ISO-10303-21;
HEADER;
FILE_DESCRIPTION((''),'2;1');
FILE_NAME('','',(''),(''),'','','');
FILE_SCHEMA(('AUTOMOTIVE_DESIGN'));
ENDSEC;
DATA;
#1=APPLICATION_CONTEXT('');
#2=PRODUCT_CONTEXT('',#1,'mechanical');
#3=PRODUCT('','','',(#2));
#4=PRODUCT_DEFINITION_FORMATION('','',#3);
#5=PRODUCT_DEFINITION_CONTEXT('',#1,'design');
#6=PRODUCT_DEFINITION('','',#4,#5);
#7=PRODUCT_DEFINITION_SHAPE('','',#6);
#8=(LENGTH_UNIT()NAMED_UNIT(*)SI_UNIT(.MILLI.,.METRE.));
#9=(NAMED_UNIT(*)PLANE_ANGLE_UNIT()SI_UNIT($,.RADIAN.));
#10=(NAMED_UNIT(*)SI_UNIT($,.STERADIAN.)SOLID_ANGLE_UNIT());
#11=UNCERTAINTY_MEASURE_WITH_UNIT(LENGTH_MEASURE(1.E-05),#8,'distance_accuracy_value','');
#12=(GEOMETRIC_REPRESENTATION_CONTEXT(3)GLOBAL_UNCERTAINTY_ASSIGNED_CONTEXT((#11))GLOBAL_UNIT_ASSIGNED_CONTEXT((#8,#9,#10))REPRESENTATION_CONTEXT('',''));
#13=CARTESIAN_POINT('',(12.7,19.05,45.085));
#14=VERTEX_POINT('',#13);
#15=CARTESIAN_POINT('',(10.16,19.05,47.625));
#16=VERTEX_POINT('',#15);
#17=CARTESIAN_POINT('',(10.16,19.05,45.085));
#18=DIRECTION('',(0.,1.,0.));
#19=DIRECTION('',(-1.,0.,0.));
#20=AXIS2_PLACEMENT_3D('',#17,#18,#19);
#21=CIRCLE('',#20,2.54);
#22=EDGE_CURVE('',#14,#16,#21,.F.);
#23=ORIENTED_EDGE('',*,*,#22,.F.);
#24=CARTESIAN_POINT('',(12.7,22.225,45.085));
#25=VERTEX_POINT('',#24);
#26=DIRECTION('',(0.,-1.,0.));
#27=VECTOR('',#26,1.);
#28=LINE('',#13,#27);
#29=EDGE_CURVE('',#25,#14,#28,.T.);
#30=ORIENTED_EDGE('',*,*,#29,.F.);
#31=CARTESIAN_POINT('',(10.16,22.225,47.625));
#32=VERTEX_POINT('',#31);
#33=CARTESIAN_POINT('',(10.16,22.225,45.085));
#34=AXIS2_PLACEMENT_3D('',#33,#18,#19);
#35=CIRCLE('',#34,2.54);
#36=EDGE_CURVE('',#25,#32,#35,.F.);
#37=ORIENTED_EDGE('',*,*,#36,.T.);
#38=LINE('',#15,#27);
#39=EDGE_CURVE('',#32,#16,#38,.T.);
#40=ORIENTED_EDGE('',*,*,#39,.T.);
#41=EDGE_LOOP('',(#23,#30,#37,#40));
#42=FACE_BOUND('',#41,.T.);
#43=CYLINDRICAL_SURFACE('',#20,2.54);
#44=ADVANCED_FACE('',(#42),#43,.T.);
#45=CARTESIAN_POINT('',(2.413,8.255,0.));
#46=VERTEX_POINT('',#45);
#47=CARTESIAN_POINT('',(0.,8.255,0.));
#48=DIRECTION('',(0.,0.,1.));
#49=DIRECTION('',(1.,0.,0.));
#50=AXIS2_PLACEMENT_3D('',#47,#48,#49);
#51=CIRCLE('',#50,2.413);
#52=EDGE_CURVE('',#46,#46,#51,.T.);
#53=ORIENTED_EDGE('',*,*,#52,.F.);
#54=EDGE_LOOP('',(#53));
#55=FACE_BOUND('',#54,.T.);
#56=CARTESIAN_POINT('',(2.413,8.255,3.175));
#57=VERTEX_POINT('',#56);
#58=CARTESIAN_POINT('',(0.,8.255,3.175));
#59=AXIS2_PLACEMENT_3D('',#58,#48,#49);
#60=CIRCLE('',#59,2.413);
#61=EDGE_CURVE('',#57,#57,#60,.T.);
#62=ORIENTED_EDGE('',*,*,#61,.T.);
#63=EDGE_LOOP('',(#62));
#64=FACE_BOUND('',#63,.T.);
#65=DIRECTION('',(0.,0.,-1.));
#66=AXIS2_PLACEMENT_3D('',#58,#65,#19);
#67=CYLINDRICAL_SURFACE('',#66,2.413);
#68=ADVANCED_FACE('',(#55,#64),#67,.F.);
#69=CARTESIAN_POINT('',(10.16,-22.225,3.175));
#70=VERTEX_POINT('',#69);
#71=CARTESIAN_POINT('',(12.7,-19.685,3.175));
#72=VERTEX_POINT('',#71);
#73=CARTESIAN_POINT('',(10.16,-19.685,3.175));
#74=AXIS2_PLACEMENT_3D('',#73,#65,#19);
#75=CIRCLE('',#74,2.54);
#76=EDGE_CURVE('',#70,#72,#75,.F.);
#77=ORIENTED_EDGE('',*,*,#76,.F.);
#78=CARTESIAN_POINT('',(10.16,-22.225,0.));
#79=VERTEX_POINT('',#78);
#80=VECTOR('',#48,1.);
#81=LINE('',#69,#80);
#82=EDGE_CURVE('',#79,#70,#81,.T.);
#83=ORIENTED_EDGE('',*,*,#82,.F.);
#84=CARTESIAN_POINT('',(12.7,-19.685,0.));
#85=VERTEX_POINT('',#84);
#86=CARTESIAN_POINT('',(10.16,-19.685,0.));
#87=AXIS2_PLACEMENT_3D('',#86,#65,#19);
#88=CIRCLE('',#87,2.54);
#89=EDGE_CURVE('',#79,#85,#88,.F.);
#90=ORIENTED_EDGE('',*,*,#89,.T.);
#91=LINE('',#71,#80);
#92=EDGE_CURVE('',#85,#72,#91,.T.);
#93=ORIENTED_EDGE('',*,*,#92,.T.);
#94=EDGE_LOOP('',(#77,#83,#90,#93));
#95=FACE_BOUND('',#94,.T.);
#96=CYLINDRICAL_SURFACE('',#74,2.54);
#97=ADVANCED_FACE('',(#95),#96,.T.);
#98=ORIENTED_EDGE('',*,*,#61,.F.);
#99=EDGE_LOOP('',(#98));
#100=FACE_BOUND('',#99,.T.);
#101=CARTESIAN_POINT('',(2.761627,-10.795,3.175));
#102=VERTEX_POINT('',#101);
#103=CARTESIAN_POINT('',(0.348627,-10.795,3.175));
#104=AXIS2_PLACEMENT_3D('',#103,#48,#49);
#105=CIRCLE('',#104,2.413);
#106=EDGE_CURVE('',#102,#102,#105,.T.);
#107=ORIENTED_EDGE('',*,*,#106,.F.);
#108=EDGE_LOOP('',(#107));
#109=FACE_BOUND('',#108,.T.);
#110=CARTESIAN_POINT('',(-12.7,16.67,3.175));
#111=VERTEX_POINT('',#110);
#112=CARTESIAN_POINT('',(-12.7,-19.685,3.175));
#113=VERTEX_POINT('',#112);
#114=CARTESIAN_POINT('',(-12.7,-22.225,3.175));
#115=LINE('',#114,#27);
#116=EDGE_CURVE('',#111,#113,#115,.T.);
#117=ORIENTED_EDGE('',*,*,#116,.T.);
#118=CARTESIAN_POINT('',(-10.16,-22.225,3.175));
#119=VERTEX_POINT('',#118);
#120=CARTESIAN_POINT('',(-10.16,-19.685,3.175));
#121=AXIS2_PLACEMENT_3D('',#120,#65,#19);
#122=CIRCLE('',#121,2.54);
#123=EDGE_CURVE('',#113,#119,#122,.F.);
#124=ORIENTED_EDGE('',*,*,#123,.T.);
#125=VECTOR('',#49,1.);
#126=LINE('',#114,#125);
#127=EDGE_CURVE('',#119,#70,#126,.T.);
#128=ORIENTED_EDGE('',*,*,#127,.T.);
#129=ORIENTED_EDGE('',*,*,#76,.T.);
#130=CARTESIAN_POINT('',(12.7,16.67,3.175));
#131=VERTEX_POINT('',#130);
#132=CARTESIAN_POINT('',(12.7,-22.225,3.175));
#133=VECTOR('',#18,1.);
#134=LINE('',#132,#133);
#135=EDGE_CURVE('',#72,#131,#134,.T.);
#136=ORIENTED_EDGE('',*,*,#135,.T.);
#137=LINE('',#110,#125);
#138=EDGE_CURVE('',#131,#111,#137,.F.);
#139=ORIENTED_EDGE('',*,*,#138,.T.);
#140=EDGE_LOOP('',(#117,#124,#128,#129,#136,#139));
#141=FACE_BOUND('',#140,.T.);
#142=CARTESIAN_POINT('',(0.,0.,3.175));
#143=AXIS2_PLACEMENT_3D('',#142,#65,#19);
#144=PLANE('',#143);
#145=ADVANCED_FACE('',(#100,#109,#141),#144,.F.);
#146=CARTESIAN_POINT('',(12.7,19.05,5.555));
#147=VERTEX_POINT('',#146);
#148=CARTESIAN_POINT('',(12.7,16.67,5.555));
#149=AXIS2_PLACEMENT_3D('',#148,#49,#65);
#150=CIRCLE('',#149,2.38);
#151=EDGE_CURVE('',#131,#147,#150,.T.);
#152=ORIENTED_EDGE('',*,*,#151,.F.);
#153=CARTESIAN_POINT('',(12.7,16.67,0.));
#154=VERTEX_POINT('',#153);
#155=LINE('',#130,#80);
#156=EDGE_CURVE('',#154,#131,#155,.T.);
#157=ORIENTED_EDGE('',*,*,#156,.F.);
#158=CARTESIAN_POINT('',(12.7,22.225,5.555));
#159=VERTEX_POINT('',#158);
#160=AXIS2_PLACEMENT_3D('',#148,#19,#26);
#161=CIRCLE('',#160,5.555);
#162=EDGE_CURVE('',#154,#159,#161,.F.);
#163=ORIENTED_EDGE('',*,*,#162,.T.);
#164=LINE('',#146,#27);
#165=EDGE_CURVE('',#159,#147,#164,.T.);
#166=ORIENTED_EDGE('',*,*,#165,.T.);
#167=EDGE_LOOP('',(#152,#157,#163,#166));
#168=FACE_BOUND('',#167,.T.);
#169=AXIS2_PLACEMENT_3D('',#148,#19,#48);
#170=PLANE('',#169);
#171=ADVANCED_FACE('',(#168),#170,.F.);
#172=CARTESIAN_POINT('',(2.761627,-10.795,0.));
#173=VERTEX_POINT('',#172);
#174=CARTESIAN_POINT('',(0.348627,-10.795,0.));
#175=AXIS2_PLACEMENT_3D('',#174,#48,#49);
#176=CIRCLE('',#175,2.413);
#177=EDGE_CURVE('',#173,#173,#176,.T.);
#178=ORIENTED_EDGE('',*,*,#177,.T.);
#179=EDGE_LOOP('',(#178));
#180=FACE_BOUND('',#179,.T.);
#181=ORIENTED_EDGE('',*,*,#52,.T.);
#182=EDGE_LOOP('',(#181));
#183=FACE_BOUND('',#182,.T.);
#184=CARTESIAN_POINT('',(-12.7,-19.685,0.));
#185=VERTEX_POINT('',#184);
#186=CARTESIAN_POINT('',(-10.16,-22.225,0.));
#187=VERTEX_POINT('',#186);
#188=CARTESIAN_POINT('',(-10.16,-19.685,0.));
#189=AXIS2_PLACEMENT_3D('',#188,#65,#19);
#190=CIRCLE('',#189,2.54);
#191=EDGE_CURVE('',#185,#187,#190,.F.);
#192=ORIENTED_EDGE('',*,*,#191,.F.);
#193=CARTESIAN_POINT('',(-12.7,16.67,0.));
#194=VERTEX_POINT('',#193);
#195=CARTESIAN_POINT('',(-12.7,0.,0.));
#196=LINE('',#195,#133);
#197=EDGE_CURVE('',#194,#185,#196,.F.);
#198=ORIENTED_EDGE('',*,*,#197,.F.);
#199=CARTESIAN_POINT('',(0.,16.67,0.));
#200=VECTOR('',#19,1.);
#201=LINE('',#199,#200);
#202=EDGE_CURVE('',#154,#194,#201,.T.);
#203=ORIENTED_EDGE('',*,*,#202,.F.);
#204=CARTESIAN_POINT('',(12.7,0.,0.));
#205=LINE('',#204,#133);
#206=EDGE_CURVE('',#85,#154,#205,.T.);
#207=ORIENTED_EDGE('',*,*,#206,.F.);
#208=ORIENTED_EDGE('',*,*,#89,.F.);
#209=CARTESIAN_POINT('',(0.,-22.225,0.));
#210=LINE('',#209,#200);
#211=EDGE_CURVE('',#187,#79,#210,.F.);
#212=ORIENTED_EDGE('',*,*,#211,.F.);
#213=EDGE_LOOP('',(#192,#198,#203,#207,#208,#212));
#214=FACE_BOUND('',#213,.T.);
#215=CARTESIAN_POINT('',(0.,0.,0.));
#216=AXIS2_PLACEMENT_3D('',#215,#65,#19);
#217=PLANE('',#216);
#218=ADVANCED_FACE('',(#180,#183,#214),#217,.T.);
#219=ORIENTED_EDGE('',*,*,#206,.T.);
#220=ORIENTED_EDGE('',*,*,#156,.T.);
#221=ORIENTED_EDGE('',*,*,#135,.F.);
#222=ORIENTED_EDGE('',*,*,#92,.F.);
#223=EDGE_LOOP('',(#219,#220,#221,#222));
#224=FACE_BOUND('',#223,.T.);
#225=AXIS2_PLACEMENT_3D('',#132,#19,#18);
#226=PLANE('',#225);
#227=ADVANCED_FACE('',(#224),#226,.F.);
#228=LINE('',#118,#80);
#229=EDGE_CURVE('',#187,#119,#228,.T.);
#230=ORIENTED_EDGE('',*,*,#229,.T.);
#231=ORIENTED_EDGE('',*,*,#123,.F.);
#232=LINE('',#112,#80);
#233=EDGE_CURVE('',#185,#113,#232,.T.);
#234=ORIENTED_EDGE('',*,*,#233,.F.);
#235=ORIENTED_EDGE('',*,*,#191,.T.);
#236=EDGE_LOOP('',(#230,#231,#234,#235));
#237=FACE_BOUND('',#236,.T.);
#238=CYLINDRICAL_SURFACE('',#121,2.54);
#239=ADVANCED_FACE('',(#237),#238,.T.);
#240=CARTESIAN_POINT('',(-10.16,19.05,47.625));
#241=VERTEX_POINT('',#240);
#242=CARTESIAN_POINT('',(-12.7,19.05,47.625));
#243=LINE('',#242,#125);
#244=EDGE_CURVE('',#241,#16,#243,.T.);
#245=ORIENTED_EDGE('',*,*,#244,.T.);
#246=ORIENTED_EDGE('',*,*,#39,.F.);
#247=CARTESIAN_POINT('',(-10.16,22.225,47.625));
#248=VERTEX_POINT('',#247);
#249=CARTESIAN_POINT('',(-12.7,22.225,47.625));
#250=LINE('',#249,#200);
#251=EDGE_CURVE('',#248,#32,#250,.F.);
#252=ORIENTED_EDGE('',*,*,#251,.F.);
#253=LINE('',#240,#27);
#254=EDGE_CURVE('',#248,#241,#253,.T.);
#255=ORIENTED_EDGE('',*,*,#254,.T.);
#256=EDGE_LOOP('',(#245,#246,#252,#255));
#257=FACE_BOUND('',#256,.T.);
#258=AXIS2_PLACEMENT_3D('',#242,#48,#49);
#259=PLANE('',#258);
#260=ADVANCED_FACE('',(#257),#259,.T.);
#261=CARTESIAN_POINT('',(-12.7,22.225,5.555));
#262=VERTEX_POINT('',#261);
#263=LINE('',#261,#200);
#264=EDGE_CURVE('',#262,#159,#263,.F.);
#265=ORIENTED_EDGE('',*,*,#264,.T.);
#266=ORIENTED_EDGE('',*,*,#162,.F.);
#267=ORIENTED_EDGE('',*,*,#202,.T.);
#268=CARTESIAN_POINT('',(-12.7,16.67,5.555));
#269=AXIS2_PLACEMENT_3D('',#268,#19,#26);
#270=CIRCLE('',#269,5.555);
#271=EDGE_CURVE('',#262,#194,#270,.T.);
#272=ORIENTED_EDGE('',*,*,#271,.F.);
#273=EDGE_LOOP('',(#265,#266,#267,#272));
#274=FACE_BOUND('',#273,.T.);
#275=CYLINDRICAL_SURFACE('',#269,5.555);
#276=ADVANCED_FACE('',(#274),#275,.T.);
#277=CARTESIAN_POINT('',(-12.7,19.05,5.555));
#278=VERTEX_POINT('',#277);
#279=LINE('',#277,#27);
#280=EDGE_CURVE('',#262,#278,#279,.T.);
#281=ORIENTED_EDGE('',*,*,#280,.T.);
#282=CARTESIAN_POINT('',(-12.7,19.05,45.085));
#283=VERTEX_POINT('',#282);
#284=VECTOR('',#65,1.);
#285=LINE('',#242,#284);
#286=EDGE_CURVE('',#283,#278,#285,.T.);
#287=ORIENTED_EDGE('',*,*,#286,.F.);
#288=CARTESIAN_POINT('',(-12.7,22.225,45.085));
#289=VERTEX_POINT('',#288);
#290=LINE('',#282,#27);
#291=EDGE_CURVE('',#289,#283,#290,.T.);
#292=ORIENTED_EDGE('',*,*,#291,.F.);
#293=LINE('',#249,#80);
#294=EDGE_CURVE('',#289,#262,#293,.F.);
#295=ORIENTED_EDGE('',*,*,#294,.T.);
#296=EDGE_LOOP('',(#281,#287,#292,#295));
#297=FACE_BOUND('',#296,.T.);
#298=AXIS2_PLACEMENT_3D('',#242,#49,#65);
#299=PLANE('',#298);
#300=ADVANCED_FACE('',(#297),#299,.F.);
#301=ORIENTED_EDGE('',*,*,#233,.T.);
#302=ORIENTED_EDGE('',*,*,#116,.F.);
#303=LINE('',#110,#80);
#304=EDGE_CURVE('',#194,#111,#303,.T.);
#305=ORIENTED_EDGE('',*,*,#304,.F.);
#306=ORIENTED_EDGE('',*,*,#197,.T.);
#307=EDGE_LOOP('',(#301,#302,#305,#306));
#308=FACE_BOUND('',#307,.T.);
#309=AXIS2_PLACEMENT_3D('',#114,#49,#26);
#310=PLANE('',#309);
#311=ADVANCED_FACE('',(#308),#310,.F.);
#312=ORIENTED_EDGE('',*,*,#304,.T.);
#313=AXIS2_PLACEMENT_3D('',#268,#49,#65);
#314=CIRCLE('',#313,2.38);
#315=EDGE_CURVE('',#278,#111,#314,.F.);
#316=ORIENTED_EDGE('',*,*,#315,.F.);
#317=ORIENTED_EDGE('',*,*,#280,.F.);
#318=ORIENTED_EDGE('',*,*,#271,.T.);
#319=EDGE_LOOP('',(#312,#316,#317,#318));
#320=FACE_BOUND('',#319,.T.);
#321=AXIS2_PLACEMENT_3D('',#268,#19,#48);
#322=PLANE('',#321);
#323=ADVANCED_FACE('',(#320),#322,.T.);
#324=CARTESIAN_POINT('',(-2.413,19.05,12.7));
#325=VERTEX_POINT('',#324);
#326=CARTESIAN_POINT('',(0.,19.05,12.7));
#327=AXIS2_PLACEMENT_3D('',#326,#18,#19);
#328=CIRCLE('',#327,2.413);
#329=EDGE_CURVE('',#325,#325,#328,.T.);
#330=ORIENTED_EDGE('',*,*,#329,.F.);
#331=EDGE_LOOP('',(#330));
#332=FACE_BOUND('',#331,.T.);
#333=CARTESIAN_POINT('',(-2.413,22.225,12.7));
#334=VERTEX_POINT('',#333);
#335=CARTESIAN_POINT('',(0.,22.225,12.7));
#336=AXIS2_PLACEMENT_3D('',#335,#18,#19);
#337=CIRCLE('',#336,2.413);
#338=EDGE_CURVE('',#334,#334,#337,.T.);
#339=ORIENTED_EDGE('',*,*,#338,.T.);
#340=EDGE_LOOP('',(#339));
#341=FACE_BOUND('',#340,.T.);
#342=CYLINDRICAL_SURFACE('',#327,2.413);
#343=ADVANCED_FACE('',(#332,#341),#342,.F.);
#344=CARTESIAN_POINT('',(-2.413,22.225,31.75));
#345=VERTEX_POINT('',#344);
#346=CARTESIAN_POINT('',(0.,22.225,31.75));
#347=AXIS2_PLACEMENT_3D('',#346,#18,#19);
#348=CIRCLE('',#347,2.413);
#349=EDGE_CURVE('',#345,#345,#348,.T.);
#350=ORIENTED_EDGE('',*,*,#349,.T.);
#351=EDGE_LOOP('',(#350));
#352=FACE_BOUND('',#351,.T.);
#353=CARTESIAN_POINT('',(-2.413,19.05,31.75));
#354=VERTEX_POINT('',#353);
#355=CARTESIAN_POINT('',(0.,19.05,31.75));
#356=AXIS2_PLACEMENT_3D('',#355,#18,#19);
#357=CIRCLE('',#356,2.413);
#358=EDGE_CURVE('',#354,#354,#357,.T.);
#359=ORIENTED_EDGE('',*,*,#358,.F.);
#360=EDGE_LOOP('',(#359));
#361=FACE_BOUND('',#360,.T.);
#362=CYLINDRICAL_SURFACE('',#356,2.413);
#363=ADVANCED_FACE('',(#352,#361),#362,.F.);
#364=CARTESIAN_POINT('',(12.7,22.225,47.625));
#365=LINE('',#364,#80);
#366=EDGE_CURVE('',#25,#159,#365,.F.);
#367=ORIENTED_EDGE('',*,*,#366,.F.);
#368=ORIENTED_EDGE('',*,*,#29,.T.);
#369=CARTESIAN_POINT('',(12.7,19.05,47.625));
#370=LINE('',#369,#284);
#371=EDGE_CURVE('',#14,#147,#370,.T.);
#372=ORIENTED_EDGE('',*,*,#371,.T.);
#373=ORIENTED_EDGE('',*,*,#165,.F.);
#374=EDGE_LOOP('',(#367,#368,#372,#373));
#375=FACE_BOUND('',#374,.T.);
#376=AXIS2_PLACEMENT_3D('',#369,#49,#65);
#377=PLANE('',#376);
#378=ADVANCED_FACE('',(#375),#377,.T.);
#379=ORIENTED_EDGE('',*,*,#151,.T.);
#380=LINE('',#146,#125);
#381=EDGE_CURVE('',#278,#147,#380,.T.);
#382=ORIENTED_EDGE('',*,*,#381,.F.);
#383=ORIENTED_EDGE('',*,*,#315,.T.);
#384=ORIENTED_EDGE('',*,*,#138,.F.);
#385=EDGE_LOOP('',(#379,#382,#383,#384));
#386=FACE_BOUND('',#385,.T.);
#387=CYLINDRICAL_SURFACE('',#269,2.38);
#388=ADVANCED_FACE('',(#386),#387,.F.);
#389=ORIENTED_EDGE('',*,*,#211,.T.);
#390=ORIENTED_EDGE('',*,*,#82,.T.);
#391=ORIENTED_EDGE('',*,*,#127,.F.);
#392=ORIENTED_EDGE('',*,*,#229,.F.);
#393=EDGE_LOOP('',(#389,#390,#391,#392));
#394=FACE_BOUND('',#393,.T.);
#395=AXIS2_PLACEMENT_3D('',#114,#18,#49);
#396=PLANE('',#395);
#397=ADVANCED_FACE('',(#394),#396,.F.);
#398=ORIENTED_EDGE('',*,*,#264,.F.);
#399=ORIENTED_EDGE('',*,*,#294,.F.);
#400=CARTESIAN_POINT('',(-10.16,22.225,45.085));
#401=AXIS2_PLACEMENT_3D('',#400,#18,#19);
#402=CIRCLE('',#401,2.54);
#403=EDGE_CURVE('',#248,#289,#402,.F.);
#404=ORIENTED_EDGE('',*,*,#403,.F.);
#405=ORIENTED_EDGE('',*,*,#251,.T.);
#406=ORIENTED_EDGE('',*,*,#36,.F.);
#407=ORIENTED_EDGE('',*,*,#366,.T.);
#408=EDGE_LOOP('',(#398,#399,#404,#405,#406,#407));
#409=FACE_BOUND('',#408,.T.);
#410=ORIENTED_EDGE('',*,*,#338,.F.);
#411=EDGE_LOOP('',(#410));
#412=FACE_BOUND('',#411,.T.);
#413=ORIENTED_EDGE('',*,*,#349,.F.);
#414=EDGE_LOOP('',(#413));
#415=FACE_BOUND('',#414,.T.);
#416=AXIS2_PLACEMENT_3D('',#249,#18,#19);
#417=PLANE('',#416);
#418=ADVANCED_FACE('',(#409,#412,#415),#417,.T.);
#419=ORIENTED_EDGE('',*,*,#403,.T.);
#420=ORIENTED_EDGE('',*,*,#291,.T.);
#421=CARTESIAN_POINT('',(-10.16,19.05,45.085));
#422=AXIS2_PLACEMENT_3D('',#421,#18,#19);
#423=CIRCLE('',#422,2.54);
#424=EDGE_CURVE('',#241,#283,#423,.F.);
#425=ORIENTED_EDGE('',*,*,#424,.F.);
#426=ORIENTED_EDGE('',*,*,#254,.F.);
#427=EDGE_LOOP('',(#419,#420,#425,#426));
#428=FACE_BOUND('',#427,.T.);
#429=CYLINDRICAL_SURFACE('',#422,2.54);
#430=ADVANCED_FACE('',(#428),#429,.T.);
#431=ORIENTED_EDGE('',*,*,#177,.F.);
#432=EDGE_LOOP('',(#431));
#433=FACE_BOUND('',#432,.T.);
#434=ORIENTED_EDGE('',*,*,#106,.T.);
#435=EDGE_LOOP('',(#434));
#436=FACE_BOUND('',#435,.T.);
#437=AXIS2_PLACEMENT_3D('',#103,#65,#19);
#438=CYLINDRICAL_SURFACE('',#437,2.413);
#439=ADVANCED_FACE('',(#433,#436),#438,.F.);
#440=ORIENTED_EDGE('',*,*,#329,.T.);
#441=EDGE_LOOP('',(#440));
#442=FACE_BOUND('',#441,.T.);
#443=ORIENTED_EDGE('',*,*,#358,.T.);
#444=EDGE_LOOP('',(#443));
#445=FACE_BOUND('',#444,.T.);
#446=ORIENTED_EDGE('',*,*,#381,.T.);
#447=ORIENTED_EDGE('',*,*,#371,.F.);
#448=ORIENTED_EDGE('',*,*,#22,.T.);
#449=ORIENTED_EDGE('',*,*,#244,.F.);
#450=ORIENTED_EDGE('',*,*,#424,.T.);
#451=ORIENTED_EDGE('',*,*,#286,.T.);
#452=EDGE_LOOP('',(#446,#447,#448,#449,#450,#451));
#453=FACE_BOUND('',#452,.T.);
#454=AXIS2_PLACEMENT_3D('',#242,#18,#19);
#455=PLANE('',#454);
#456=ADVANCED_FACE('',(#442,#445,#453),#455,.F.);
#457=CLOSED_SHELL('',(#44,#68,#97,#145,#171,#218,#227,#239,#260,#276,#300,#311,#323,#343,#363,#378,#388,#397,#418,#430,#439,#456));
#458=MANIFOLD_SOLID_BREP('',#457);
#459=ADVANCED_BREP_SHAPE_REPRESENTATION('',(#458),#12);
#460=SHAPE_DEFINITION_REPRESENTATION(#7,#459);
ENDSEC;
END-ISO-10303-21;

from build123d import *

# Parameters (mm, degrees)
SKETCH1_W              = 25.4
SKETCH1_H              = 44.45
SKETCH1_R              = 2.413
BOSS_EXTRUDE1_DEPTH    = 3.175
SKETCH2_W              = 25.4
SKETCH2_H              = 3.175
BOSS_EXTRUDE2_DEPTH    = 44.45
SKETCH3_R              = 2.413
CUT_EXTRUDE1_DEPTH     = 44.45
FILLET1_R              = 2.54
CONVERT_SOLID1_START   = -12.7
CONVERT_SOLID1_DEPTH   = 25.4
CONVERT_SOLID1_2_DEPTH = 25.4


# Read off the part's stored shape, not the designer's step: Convert-Solid1
with BuildPart() as part:
    # Sketch1 → Boss-Extrude1 (new body)
    with BuildSketch(Plane.XY):
        Rectangle(SKETCH1_W, SKETCH1_H)
        with Locations((0, 8.255)):
            Circle(SKETCH1_R, mode=Mode.SUBTRACT)
        with Locations((0.348627451, -10.795)):
            Circle(SKETCH1_R, mode=Mode.SUBTRACT)
    extrude(amount=BOSS_EXTRUDE1_DEPTH)

    # Sketch2 → Boss-Extrude2 (add)
    with BuildSketch(Plane.XY.offset(3.175)):
        with Locations((0, 20.6375)):
            Rectangle(SKETCH2_W, SKETCH2_H)
    extrude(amount=BOSS_EXTRUDE2_DEPTH)

    # Sketch3 → Cut-Extrude1 (cut)
    with BuildSketch(Plane(origin=(0, 22.225, 0), x_dir=(1, 0, 0), z_dir=(0, 1, 0))):
        with Locations(Location((0, -12.7, 0), (0, 0, 270))):
            Circle(SKETCH3_R)
        with Locations(Location((0, -31.75, 0), (0, 0, 270))):
            Circle(SKETCH3_R)
    extrude(amount=-CUT_EXTRUDE1_DEPTH, mode=Mode.SUBTRACT)

    # Fillet1
    fillet1_edges = [part.edges().sort_by_distance(p)[0] for p in [
        (-12.7, 20.6375, 47.625),
        (12.7, 20.6375, 47.625),
        (12.7, -22.225, 1.5875),
        (-12.7, -22.225, 1.5875),
    ]]
    fillet(fillet1_edges, radius=FILLET1_R)

    # Convert-Solid1 outline → Convert-Solid1 (cut)
    with BuildSketch(Plane.YZ.offset(CONVERT_SOLID1_START)):
        with BuildLine():
            Line((22.225, 0), (22.225, 5.555000066))
            ThreePointArc((22.225, 5.555000066), (20.59797815, 1.62702185), (16.669999934, 0))
            Line((16.669999934, 0), (22.225, 0))
        make_face()
    extrude(amount=CONVERT_SOLID1_DEPTH, mode=Mode.SUBTRACT)

    # Convert-Solid1 2 outline → Convert-Solid1 2 (add)
    with BuildSketch(Plane.YZ.offset(CONVERT_SOLID1_START)):
        with BuildLine():
            Line((19.05, 3.175), (19.05, 5.555000066))
            ThreePointArc((19.05, 5.555000066), (18.35291412, 3.87208588), (16.669999934, 3.175))
            Line((16.669999934, 3.175), (19.05, 3.175))
        make_face()
    extrude(amount=CONVERT_SOLID1_2_DEPTH)


solid = part.part
